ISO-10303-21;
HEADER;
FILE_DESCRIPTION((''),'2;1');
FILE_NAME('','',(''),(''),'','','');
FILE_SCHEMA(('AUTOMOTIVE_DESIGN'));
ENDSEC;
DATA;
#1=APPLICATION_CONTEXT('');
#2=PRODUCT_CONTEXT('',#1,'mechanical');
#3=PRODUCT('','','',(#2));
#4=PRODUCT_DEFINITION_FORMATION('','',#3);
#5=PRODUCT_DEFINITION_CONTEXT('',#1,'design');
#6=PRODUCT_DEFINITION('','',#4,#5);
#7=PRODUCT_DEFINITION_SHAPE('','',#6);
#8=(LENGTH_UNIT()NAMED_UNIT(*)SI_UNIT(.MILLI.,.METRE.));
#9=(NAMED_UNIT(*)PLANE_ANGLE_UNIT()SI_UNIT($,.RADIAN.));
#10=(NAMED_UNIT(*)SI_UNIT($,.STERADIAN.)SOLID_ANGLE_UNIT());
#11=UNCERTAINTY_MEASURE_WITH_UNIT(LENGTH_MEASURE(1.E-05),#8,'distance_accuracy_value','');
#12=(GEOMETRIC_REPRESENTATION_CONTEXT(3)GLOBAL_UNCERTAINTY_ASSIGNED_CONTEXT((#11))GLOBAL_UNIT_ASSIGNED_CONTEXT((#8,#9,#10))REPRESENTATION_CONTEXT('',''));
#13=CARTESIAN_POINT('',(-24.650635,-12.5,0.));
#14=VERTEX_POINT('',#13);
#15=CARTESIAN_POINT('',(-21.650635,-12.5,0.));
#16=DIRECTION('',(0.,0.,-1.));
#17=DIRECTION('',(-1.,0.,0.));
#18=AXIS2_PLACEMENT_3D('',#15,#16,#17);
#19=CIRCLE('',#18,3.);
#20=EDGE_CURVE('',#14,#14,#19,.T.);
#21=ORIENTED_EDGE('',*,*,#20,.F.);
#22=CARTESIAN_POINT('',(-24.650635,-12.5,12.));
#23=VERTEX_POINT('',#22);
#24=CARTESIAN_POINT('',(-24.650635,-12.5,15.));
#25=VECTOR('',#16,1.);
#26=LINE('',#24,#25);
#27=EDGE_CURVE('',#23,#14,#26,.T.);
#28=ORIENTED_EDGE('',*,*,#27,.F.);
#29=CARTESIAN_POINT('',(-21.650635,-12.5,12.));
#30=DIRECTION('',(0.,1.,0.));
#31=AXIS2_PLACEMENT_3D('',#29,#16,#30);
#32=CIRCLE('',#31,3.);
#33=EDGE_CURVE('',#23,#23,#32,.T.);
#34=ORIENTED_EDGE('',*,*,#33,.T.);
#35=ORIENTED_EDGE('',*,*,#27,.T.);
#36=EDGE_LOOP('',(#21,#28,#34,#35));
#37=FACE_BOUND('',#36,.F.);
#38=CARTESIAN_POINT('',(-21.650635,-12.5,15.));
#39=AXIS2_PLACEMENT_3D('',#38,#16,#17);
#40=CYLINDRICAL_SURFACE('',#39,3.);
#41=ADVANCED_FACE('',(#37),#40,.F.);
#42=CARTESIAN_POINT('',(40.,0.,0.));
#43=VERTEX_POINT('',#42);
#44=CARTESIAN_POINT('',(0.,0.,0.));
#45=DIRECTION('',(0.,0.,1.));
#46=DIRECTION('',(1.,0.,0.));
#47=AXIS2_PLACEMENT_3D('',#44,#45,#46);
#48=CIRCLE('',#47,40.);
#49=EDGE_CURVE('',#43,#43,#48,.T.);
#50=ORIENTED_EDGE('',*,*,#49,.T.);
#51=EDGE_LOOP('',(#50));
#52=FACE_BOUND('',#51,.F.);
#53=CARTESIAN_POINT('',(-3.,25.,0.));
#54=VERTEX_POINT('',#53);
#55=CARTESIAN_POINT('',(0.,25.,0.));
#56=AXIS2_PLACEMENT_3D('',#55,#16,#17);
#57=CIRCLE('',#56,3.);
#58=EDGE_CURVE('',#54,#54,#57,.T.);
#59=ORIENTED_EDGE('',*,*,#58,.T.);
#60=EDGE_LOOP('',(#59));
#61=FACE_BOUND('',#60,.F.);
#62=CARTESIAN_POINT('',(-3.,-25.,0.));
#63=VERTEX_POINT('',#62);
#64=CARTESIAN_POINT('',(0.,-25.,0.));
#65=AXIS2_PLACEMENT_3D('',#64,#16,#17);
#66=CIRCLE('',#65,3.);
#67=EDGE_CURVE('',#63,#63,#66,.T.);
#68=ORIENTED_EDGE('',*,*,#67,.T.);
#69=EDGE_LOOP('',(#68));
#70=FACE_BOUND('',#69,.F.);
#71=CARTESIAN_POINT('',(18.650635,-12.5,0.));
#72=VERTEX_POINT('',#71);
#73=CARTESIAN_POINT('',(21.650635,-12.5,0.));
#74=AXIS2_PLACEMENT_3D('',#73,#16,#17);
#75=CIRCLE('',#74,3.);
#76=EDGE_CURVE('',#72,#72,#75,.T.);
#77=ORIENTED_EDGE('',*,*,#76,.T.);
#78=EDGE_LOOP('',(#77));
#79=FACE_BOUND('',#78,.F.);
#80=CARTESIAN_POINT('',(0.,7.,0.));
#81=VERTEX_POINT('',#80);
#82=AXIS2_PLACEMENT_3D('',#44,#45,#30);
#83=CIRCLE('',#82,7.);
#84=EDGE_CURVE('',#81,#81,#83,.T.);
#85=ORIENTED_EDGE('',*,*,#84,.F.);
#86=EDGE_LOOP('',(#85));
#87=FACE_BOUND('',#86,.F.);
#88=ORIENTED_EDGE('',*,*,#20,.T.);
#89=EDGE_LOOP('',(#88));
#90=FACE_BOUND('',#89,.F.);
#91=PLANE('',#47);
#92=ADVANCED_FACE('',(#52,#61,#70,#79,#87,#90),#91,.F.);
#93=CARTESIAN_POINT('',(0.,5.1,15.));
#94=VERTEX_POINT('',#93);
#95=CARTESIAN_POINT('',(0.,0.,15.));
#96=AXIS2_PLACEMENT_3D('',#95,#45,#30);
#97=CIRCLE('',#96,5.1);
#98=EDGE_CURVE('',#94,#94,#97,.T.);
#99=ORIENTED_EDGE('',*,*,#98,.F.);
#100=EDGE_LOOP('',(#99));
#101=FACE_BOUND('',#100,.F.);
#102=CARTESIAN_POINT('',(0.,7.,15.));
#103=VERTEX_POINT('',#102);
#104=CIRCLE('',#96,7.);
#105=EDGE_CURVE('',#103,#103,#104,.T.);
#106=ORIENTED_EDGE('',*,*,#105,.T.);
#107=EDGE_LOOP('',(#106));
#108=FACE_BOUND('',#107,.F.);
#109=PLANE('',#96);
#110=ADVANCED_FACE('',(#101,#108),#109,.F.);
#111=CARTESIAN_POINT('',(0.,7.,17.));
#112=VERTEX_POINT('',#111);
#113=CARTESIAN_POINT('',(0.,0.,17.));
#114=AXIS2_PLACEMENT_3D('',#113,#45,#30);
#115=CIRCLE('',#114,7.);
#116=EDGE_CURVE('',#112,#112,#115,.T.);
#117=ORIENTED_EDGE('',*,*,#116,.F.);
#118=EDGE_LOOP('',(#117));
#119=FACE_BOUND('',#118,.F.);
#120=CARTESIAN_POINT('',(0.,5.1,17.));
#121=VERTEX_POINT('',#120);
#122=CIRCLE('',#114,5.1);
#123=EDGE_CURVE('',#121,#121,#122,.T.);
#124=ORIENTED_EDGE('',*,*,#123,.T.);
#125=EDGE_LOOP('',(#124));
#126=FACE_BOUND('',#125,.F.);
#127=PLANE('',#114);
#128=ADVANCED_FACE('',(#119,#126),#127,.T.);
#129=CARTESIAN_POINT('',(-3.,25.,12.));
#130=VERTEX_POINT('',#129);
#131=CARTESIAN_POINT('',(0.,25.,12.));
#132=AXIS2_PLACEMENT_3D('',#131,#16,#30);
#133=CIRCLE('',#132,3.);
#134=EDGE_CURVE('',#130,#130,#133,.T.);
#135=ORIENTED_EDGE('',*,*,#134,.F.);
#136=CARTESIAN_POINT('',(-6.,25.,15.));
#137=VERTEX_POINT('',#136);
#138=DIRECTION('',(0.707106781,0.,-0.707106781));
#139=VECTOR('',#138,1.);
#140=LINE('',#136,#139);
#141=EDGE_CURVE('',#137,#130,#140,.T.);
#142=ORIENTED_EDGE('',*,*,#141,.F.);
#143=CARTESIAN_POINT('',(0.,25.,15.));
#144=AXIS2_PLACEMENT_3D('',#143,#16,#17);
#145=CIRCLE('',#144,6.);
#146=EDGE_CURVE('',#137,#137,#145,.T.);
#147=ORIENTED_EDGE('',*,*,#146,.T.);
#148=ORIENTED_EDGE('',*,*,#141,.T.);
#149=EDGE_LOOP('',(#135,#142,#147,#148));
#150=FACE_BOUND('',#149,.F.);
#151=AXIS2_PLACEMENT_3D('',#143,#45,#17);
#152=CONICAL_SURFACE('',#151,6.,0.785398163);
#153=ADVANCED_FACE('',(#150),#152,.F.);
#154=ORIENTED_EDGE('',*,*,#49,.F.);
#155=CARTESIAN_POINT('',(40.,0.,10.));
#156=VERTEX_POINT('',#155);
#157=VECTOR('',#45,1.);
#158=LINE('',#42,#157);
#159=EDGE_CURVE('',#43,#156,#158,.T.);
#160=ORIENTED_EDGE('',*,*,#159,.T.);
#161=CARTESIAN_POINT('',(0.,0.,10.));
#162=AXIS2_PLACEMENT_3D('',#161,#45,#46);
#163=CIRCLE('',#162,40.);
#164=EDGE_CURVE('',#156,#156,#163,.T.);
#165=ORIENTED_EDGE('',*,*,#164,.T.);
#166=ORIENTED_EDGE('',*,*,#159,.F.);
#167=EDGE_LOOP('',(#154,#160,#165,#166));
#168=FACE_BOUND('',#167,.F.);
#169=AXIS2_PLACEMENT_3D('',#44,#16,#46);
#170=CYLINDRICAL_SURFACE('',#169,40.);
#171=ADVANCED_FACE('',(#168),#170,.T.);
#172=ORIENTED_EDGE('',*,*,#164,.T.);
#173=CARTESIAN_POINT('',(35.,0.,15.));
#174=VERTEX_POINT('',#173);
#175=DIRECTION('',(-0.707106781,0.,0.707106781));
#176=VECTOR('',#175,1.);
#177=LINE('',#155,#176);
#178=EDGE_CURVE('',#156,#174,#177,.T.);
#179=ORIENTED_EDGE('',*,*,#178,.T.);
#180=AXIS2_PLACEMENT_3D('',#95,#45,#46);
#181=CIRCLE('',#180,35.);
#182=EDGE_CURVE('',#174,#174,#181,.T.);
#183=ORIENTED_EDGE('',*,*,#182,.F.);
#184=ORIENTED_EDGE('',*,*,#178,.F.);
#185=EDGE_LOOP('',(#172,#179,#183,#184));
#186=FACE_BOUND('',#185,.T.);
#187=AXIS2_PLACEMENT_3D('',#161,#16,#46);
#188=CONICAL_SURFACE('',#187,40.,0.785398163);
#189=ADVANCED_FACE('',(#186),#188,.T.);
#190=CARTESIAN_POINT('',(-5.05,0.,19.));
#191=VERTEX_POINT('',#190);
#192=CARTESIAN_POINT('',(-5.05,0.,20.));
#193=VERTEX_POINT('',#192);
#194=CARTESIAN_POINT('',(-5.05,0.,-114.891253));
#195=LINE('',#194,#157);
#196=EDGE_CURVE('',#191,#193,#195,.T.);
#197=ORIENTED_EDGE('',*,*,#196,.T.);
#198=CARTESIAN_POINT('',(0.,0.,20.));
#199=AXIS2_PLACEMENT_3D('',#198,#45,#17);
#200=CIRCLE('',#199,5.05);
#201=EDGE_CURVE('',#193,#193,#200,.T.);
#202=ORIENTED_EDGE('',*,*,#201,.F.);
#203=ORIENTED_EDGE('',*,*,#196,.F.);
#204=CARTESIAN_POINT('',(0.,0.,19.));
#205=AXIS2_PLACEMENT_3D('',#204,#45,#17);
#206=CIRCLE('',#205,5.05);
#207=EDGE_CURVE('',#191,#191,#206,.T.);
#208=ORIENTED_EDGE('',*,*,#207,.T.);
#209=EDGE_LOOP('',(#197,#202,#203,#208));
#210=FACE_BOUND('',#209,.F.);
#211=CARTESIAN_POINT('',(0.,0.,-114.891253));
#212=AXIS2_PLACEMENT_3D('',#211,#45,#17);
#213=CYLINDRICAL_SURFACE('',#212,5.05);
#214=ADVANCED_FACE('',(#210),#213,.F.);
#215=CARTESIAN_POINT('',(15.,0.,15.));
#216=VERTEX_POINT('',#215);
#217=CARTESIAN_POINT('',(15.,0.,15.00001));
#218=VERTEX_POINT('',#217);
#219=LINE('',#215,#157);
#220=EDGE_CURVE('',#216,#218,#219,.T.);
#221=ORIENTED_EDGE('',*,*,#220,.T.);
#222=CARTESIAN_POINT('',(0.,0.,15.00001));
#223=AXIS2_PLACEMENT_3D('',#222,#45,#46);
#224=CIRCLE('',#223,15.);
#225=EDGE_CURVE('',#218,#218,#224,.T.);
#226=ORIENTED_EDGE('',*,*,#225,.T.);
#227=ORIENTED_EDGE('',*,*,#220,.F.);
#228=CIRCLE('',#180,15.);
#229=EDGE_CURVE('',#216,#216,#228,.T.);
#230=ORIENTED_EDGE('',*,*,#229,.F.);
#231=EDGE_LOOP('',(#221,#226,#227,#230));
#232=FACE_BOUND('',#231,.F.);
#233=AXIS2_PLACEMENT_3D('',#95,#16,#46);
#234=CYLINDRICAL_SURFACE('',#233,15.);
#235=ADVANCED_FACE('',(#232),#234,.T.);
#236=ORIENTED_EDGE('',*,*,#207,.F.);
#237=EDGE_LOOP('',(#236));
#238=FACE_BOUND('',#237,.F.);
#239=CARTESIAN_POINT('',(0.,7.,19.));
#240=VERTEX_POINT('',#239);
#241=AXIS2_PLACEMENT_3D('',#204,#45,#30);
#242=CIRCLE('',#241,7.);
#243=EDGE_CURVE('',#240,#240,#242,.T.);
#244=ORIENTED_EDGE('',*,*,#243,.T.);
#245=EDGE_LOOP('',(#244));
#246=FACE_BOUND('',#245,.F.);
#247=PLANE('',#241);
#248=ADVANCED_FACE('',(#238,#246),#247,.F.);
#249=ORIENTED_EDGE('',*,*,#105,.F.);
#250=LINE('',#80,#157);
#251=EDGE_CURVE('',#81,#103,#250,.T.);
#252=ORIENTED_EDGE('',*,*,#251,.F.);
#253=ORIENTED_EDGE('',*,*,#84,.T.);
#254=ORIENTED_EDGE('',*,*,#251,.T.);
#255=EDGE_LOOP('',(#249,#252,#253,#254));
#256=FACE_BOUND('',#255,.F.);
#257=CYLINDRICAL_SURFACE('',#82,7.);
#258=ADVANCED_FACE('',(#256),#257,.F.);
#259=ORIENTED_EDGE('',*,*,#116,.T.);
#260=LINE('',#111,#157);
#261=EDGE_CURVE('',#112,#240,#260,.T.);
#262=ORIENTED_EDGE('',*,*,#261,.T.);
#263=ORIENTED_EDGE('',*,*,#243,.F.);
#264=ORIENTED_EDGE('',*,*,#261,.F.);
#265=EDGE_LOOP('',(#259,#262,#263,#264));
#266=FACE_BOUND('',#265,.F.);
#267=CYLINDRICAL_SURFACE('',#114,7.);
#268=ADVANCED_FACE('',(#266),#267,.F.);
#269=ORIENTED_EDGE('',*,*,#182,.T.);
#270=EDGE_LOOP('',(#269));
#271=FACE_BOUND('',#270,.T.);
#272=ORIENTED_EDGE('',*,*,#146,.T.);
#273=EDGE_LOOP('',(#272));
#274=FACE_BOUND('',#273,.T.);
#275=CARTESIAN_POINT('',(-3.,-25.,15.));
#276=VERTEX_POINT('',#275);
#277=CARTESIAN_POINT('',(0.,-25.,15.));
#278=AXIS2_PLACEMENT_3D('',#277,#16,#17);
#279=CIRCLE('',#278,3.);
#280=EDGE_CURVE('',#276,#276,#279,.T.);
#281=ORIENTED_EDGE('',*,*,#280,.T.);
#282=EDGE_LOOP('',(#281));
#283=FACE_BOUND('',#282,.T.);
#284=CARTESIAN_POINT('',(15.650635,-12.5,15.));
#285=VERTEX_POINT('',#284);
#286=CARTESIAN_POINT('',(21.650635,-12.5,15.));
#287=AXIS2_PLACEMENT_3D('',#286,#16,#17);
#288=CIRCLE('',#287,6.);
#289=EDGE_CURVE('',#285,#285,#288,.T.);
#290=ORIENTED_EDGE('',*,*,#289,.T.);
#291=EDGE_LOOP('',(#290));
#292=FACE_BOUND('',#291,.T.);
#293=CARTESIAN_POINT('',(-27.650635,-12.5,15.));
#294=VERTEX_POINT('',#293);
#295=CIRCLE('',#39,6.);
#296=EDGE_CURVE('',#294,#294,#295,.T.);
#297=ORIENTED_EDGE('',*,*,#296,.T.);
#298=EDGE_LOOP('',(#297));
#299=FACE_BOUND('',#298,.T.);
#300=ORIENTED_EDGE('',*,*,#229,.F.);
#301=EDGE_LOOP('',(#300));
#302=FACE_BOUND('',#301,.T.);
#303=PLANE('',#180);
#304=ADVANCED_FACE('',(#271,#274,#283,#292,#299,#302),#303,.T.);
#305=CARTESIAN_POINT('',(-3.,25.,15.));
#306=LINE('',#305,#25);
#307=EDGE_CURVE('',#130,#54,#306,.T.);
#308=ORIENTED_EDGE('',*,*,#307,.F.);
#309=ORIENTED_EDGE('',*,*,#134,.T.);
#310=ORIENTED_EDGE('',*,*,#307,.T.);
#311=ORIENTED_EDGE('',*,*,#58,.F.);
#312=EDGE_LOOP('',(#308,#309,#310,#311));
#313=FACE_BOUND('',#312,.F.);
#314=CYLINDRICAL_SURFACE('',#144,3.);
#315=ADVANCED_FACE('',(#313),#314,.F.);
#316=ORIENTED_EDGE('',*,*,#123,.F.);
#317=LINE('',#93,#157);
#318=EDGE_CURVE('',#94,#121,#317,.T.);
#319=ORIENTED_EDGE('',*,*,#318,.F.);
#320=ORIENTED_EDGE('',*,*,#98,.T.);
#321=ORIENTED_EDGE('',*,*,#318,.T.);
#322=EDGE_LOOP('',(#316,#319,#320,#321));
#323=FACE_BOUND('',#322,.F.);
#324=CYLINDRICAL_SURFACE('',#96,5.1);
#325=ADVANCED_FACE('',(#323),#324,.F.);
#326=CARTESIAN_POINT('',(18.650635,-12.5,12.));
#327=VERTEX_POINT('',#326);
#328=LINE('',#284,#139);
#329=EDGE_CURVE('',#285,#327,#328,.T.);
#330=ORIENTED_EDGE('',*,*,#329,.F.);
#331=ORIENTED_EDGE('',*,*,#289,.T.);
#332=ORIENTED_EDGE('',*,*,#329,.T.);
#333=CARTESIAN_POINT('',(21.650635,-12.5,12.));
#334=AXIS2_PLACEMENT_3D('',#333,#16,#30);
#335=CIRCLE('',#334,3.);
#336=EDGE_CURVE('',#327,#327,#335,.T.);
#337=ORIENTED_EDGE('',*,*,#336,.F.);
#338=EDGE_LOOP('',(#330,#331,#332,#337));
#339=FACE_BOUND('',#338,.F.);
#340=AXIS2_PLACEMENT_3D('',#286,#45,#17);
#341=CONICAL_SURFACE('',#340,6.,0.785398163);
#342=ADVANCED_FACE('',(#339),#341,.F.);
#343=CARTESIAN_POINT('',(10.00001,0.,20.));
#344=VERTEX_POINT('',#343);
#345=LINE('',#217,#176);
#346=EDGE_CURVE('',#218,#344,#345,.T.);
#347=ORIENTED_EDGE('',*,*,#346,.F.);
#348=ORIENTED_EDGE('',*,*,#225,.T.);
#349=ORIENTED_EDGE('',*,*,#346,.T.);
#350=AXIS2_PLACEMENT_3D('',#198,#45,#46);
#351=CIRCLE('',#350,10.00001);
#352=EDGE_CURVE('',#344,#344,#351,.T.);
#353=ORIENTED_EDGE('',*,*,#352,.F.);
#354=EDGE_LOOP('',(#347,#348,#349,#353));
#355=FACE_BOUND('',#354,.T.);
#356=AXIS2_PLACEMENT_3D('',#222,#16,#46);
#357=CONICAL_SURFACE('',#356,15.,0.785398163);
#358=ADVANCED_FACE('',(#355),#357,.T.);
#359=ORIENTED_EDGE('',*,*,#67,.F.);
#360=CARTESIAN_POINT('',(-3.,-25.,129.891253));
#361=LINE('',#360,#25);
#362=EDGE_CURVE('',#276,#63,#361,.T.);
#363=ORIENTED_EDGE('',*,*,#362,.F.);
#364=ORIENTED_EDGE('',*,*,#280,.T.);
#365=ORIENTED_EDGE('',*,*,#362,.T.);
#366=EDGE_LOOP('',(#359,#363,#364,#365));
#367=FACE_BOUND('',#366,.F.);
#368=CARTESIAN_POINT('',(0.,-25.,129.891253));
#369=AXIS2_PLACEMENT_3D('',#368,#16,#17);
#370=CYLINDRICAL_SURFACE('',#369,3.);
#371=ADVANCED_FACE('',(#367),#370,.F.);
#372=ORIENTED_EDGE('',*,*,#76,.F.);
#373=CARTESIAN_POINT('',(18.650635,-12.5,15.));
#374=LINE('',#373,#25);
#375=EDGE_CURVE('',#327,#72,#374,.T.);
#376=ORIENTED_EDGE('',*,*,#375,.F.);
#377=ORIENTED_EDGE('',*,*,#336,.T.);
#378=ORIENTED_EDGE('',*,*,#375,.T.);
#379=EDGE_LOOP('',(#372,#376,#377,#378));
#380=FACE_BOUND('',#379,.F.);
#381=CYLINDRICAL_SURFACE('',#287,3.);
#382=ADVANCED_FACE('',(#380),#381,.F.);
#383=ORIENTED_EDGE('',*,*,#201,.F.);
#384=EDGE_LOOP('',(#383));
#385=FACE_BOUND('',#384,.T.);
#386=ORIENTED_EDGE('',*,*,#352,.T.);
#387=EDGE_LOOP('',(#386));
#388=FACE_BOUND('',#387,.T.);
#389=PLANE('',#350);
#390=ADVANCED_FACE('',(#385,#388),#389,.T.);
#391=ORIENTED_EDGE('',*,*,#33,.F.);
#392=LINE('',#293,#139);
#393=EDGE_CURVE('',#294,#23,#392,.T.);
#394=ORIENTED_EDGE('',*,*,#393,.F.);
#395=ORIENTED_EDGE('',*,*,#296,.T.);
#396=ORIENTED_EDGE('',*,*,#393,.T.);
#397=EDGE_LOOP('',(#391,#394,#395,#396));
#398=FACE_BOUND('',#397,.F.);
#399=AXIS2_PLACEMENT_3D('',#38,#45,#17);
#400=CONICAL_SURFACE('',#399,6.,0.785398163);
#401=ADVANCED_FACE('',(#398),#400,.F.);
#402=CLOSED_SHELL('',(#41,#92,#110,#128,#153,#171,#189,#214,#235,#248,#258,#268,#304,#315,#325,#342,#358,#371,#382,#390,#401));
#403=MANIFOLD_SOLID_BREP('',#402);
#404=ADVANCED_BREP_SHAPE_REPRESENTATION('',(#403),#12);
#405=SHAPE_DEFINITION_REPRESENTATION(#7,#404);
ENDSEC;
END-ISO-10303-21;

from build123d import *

# Parameters (mm, degrees)
F0_R           = 40
F1_DEPTH       = 15
F2_SIZE        = 5
F3_R           = 15
F4_DEPTH       = 5
F5_SIZE        = 4.99999
F7_D           = 6
F7_CSINK_D     = 12
F7_CSINK_ANGLE = 90
F8_D           = 10.1
F11_D          = 6


# Not quite as in the source:
# - a fillet or chamfer is up to 0.001 mm smaller than in the source, because OpenCascade refuses the exact size


with BuildPart() as f1:
    # F0 (on Top) → F1 (new body)
    with BuildSketch(Plane.XY):
        Circle(F0_R)
    extrude(amount=F1_DEPTH)

    # F2
    f2_edges = [f1.edges().sort_by_distance(p)[0] for p in [
        (-40, 0, 15),
    ]]
    chamfer(f2_edges, length=F2_SIZE)

    # F3 (on face) → F4 (join)
    with BuildSketch(Plane.XY.offset(15)):
        Circle(F3_R)
    extrude(amount=F4_DEPTH)

    # F5 (size 5 in the source; OpenCascade refuses exactly that, so slightly less here)
    f5_edges = [f1.edges().sort_by_distance(p)[0] for p in [
        (-15, 0, 20),
    ]]
    chamfer(f5_edges, length=F5_SIZE)

    # F7 (through all)
    with Locations(Plane.XY.offset(15)):
        with Locations((0, 25), (-21.6506350946, -12.5), (21.6506350946, -12.5)):
            CounterSinkHole(F7_D / 2, F7_CSINK_D / 2, counter_sink_angle=F7_CSINK_ANGLE)

    # F8 (through all)
    with Locations(Plane(origin=(0, 0, 0), x_dir=(1, 0, 0), z_dir=(0, 0, -1))):
        with Locations((0, 0)):
            Hole(F8_D / 2)

    # F9 (on Right) → F10 (revolve, cut)
    with BuildSketch(Plane.YZ):
        Polygon((7, 19), (0, 19), (0, 0), (7, 0), (7, 15), (5.1, 15), (5.1, 17), (7, 17), align=None)
    revolve(axis=Axis((0, 0, 9.5), (0, 0, 1)), mode=Mode.SUBTRACT)

    # F11 (through all)
    with Locations(Plane.XY.offset(15)):
        with Locations((0, -25)):
            Hole(F11_D / 2)


solid = f1.part
